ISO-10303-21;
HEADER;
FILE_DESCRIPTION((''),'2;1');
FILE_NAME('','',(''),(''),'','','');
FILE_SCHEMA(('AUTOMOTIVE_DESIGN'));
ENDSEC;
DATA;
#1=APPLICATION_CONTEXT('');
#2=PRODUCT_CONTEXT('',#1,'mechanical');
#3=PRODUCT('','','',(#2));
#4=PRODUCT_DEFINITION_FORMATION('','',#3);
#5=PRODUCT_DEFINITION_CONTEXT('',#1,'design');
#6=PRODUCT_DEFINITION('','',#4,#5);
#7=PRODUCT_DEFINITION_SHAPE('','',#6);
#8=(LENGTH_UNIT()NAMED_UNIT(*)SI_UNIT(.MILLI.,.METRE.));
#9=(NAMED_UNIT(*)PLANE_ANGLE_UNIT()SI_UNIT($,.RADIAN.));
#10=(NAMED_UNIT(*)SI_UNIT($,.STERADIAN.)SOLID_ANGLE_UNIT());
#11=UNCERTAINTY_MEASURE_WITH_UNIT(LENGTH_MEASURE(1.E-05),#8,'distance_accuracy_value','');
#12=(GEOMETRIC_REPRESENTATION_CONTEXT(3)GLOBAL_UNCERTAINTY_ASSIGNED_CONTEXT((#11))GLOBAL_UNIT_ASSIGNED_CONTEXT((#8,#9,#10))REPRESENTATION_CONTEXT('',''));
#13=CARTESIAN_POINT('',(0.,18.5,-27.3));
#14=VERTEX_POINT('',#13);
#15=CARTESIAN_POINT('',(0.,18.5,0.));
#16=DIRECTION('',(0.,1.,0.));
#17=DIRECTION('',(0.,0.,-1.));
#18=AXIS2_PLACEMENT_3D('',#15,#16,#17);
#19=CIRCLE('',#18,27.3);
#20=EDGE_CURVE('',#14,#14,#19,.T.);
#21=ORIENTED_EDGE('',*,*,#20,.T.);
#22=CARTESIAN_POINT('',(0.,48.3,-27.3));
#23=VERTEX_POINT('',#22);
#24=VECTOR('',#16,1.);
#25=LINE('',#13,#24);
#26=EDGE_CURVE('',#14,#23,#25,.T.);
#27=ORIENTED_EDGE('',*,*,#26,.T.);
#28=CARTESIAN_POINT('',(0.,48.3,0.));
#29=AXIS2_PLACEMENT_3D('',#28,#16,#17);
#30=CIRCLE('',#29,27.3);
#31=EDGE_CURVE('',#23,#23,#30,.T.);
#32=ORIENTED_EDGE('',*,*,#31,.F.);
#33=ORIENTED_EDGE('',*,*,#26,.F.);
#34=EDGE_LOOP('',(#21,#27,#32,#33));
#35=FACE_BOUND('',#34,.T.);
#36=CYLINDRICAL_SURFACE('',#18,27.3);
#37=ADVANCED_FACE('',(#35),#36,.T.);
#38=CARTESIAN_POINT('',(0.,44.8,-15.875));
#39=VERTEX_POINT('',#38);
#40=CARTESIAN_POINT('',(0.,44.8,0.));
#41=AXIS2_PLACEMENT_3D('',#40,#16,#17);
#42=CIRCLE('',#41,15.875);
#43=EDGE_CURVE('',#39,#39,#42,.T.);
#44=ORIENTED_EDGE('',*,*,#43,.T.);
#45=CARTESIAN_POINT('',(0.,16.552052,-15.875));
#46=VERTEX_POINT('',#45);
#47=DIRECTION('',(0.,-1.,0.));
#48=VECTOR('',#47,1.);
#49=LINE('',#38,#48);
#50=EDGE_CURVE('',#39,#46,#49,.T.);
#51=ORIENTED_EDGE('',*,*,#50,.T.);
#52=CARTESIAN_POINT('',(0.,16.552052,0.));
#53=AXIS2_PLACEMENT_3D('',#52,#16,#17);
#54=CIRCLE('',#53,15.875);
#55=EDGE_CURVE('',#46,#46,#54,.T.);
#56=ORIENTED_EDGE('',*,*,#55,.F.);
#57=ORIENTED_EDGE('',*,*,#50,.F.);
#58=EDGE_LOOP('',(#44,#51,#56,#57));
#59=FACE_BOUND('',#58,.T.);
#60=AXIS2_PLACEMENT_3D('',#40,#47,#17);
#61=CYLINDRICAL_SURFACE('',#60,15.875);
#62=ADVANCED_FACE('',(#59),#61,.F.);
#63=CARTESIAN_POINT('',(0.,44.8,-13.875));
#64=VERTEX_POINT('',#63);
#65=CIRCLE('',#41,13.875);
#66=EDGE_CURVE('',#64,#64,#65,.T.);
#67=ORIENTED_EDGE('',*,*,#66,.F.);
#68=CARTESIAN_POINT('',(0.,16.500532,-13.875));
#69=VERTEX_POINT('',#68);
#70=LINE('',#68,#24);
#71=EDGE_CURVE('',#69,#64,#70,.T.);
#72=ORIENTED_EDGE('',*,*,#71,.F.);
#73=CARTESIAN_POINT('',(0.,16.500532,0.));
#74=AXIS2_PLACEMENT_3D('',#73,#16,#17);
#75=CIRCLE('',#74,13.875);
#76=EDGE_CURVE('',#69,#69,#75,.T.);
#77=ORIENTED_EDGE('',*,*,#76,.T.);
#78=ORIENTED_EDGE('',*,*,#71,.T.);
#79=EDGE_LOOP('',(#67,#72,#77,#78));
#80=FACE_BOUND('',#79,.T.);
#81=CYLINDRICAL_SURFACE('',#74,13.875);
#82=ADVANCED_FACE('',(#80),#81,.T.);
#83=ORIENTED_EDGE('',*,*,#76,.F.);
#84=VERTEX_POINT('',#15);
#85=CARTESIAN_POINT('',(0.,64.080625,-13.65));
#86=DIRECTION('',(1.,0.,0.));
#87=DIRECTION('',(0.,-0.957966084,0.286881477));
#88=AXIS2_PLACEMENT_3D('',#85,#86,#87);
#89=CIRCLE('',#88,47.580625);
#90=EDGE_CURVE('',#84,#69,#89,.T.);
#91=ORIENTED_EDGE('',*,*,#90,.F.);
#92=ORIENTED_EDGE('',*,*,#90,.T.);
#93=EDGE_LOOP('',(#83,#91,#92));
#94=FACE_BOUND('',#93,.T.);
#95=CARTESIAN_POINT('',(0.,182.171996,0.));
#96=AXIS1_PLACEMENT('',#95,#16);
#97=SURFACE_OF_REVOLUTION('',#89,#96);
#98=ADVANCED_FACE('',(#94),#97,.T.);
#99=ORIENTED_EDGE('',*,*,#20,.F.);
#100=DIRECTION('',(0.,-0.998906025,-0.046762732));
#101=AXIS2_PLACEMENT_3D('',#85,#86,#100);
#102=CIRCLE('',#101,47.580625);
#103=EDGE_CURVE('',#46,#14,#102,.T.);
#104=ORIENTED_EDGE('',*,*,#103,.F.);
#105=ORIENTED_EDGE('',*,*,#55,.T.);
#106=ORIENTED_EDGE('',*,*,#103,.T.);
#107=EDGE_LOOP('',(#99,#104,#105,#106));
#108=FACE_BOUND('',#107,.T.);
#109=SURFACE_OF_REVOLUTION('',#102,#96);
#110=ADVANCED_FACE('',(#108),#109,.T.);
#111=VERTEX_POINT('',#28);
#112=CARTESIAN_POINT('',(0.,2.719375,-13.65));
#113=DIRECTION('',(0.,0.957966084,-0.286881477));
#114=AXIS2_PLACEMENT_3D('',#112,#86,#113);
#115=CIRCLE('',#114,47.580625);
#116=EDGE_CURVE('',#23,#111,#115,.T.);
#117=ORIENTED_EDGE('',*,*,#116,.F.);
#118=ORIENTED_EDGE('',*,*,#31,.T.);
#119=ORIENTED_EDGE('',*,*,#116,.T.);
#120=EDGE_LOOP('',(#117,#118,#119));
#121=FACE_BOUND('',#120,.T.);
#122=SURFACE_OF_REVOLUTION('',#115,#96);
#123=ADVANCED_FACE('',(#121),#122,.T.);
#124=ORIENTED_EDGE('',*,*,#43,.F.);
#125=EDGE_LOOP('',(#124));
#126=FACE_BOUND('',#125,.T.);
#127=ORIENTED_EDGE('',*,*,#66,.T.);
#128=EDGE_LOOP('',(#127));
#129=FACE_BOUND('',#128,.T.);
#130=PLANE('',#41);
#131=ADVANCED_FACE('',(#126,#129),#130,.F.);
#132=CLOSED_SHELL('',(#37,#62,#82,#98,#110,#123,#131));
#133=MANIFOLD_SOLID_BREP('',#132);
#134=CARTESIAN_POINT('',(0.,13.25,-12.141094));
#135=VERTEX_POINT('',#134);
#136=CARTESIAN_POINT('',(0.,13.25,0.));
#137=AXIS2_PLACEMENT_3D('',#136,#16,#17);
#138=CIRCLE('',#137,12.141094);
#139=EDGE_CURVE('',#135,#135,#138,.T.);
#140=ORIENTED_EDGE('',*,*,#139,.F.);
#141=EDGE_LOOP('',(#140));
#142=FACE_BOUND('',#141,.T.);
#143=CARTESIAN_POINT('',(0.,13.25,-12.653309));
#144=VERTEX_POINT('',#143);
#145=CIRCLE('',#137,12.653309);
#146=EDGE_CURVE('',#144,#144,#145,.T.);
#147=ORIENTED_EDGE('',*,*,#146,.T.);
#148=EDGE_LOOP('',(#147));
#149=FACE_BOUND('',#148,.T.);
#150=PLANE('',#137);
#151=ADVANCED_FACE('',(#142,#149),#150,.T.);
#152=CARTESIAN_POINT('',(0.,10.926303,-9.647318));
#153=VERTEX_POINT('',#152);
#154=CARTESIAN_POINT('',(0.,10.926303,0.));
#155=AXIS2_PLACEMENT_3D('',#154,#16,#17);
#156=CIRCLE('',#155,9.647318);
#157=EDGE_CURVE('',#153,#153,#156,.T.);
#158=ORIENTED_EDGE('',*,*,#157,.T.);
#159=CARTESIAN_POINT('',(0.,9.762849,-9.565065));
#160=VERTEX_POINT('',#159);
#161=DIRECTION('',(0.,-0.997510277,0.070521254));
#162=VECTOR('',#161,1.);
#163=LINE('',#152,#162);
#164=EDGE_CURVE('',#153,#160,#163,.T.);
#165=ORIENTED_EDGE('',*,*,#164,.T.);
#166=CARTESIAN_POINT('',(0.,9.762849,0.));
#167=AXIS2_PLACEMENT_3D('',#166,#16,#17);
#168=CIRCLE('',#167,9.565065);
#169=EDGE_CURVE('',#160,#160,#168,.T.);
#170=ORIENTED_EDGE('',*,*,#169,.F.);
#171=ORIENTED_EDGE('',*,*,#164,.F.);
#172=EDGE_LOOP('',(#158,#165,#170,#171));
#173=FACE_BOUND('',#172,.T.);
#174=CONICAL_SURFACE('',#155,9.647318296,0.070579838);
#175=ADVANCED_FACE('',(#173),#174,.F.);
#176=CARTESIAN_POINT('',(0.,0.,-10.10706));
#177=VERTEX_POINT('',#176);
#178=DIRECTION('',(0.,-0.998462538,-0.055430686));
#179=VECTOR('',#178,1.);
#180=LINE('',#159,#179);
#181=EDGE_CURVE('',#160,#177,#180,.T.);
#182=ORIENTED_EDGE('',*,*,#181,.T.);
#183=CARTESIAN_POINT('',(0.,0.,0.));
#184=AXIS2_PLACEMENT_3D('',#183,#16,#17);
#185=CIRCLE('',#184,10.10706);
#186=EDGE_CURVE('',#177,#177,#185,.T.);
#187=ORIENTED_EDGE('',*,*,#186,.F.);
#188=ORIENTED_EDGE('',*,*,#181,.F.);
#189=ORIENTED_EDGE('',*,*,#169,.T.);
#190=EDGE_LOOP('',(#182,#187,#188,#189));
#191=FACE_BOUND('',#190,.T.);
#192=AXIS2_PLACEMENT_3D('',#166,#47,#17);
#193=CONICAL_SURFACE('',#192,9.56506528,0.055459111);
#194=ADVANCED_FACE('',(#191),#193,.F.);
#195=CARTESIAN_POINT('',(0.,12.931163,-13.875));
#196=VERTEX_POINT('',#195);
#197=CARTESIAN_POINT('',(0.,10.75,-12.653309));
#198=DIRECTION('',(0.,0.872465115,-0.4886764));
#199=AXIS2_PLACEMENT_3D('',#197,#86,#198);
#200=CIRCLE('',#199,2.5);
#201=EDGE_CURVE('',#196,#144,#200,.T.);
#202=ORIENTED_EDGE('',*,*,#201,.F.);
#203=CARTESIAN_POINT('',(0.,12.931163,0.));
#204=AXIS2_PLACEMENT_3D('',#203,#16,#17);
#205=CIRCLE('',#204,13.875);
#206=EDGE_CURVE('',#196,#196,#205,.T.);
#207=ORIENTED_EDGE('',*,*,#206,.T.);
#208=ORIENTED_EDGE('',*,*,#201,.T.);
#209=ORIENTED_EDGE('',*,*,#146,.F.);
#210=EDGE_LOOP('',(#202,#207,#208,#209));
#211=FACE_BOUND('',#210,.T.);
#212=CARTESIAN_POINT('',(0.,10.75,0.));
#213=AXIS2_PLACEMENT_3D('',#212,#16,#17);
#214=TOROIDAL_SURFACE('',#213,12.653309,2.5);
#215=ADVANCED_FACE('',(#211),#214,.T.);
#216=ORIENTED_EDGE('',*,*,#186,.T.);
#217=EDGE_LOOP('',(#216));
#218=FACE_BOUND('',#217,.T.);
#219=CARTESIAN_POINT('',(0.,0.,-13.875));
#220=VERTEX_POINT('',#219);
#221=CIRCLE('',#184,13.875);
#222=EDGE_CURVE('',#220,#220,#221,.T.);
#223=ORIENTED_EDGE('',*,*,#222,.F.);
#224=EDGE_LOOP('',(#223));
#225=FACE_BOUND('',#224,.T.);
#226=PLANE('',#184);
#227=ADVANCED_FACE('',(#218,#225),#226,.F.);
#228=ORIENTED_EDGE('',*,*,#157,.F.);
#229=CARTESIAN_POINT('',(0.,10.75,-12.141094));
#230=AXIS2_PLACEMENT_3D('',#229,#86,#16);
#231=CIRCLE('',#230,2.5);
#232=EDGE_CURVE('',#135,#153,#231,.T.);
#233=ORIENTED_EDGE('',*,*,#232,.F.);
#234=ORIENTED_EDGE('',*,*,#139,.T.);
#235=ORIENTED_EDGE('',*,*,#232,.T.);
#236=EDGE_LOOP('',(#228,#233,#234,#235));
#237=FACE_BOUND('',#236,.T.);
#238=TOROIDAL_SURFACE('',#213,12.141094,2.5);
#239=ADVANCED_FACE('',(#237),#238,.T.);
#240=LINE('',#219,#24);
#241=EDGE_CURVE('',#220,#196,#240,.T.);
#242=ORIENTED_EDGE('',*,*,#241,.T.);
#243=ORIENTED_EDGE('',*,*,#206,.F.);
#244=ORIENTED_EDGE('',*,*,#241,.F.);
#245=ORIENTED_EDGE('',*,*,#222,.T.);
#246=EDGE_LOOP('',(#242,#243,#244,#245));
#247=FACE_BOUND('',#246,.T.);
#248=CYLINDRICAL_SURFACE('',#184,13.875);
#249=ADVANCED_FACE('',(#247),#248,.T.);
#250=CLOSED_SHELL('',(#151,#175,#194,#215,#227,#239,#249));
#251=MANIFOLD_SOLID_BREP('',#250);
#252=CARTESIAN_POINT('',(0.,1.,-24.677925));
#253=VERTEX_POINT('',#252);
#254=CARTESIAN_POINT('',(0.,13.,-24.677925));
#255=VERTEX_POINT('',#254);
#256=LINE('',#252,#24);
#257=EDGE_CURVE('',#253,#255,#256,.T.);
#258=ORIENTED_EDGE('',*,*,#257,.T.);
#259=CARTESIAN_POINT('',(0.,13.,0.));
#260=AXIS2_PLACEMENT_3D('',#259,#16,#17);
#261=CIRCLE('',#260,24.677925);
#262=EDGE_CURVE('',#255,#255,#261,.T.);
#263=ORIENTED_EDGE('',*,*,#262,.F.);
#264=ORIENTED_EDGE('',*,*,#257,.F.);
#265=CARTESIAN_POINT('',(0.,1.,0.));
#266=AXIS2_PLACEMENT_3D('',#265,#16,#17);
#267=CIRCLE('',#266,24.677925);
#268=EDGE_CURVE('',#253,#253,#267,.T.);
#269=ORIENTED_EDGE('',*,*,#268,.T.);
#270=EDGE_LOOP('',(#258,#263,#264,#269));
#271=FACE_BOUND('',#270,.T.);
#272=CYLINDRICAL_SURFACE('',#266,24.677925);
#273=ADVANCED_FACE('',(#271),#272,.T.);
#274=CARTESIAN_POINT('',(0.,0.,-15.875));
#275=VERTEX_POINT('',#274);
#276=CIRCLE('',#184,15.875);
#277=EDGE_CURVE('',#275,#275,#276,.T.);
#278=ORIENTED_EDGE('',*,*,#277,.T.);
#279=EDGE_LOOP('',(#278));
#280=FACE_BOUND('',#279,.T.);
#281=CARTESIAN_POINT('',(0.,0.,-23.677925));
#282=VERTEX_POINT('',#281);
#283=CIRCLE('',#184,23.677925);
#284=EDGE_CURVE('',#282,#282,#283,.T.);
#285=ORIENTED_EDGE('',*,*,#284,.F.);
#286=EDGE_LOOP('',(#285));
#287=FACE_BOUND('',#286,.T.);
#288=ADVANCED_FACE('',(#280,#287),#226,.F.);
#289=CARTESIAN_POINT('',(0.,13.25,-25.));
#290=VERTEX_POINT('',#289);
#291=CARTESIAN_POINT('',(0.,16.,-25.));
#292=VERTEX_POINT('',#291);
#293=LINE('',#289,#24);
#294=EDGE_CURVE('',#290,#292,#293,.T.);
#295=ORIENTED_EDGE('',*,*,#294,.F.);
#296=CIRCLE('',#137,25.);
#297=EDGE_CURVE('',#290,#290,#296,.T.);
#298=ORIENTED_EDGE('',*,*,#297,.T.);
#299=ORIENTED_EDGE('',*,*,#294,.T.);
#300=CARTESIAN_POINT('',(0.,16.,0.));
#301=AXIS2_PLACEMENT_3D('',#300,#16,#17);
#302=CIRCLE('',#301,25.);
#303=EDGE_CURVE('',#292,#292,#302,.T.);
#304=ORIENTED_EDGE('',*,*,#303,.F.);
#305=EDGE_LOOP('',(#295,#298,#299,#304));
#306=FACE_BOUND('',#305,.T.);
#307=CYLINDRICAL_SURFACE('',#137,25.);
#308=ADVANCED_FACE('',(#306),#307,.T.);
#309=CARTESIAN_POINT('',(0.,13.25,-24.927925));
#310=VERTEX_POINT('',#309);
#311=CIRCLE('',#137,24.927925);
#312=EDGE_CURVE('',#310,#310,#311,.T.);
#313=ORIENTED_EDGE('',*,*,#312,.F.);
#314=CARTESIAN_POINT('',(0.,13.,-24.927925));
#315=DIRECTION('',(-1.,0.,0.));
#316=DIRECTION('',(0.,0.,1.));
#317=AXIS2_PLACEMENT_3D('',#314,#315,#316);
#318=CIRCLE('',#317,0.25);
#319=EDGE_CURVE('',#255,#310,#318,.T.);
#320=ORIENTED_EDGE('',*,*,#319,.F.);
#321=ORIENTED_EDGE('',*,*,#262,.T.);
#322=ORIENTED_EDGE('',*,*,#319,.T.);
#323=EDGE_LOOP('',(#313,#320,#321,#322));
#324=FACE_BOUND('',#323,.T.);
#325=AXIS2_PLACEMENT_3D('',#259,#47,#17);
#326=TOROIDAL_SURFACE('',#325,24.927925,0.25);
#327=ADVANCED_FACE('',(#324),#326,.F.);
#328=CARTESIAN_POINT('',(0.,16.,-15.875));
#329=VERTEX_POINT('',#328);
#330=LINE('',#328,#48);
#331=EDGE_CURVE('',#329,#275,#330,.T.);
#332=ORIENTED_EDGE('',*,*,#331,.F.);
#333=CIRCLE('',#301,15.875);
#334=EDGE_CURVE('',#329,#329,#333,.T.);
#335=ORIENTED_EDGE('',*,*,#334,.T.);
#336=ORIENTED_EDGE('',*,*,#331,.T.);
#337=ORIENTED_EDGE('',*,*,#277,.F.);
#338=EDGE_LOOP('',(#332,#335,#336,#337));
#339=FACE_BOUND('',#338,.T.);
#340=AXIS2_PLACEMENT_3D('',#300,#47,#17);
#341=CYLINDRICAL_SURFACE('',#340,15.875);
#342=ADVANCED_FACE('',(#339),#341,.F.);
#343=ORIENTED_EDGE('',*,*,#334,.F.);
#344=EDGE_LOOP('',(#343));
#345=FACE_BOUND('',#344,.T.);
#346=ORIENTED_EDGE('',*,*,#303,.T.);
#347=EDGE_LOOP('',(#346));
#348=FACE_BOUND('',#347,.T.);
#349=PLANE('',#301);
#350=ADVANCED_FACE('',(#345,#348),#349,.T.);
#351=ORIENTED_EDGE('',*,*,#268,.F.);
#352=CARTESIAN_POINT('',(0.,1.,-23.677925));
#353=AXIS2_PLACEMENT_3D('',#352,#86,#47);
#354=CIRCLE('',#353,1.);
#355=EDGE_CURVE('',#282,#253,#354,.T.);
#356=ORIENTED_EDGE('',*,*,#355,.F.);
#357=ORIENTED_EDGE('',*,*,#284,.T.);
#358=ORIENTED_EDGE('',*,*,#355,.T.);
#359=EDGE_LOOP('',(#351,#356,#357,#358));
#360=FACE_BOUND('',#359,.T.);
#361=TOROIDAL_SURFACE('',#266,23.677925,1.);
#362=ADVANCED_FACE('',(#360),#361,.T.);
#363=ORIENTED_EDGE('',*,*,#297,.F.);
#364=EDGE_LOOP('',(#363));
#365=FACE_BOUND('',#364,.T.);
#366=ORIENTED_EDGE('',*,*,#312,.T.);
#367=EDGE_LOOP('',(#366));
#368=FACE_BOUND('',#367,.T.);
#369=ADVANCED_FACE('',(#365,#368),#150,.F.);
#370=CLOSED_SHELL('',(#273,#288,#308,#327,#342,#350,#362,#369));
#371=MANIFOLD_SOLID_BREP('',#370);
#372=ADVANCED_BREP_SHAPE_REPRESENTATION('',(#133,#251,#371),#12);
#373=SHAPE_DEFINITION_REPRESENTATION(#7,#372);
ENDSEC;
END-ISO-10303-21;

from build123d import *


# Not quite as in the source:
# - ends of sketch curves that miss each other by under 0.0002 mm in the source are joined


with BuildPart() as f1:
    # F0 (on Right) → F1 (revolve)
    with BuildSketch(Plane.YZ):
        with BuildLine():
            Line((48.3, 0), (44.8, 0))
            Line((44.8, 0), (44.8, -13.875))
            Line((44.8, -13.875), (44.8, -15.875))
            Line((44.8, -15.875), (44.8, -16))
            Line((44.8, -16), (50.2419314905, -16))
            ThreePointArc((50.2419314905, -16), (49.9533733583, -7.9171756979), (48.3, 0))
        make_face()
        with BuildLine():
            Line((44.8, -15.875), (16.5520520108, -15.875))
            ThreePointArc((16.5520520108, -15.875), (17.1768581598, -21.6470326742), (18.5, -27.3))
            Line((18.5, -27.3), (48.3, -27.3))
            ThreePointArc((48.3, -27.3), (49.6125845395, -21.7087079906), (50.2419314905, -16))
            Line((50.2419314905, -16), (44.8, -16))
            Line((44.8, -16), (44.8, -15.875))
        make_face()
        with BuildLine():
            Line((44.8, 0), (18.5, 0))
            ThreePointArc((18.5, 0), (16.9864772631, -6.8634600623), (16.5005319947, -13.875))
            Line((16.5005319947, -13.875), (44.8, -13.875))
            Line((44.8, -13.875), (44.8, 0))
        make_face()
    revolve(axis=Axis((0, 182.171996, 0), (0, 1, 0)))


with BuildPart() as f1b:
    # F0 (on Right) → F1, piece 2 (revolve)
    with BuildSketch(Plane.YZ):
        with BuildLine():
            Line((0, -13.875), (12.9311627863, -13.875))
            ThreePointArc((12.9311627863, -13.875), (13.1689777764, -13.2846144071), (13.25, -12.653309))
            Line((13.25, -12.653309), (13.25, -12.141094))
            ThreePointArc((13.25, -12.141094), (12.5790376496, -10.4367990501), (10.926302979, -9.6473182965))
            Line((10.926302979, -9.6473182965), (9.7628490509, -9.5650652795))
            Line((9.7628490509, -9.5650652795), (0, -10.10706))
            Line((0, -10.10706), (0, -13.875))
        make_face()
    revolve(axis=Axis((0, 182.171996, 0), (0, 1, 0)))


with BuildPart() as f1c:
    # F0 (on Right) → F1, piece 3 (revolve)
    with BuildSketch(Plane.YZ):
        with BuildLine():
            Line((16, -25), (16, -15.875))
            Line((16, -15.875), (0, -15.875))
            Line((0, -15.875), (0, -23.677925))
            ThreePointArc((0, -23.677925), (0.2928932188, -24.3850317812), (1, -24.677925))
            Line((1, -24.677925), (13, -24.677925))
            ThreePointArc((13, -24.677925), (13.1767766953, -24.7511483047), (13.25, -24.927925))
            Line((13.25, -24.927925), (13.25, -25))
            Line((13.25, -25), (16, -25))
        make_face()
    revolve(axis=Axis((0, 182.171996, 0), (0, 1, 0)))


solid = Compound([f1.part, f1b.part, f1c.part])
